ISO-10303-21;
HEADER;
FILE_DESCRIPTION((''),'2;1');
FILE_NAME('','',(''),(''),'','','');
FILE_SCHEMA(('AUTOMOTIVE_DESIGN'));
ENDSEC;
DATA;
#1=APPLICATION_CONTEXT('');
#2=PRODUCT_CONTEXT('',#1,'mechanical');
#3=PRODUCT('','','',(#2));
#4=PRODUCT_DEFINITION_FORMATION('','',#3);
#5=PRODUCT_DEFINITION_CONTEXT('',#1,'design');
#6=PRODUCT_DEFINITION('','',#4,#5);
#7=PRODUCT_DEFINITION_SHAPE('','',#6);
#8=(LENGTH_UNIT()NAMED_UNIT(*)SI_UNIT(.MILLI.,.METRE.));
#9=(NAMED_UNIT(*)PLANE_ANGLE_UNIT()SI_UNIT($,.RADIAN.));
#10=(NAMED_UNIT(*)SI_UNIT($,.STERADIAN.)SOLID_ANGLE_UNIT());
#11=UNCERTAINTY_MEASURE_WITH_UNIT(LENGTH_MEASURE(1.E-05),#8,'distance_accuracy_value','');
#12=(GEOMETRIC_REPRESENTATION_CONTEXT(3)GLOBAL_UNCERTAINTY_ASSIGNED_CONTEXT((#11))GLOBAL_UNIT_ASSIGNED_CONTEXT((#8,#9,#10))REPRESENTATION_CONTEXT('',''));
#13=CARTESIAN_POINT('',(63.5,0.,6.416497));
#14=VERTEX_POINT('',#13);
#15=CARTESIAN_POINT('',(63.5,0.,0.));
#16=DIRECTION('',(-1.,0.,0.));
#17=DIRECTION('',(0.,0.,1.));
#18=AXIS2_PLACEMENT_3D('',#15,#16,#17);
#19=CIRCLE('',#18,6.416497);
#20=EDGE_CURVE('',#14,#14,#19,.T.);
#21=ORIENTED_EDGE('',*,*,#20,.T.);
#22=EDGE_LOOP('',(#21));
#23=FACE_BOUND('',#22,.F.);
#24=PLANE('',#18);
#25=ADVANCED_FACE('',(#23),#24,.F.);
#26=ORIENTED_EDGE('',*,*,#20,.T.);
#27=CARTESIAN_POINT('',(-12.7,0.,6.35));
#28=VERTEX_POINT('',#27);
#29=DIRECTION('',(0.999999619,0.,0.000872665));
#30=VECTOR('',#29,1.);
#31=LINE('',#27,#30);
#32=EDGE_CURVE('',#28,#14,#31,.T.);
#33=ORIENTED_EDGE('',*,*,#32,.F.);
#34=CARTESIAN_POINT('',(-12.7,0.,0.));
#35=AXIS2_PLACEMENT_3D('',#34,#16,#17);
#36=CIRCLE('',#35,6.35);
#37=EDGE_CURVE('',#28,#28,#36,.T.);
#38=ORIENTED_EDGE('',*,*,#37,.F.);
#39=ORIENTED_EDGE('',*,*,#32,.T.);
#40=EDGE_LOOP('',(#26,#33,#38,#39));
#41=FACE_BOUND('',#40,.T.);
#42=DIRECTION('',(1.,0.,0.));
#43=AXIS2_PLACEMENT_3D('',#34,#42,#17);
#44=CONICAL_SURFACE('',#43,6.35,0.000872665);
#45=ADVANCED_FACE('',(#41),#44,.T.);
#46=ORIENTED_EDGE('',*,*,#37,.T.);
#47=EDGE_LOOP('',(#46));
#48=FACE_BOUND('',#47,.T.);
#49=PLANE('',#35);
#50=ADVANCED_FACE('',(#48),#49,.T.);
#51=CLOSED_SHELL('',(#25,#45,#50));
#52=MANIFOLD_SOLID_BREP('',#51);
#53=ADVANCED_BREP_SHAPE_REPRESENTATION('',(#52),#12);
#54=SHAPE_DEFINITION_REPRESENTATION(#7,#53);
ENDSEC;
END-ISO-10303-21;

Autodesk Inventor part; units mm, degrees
ref_plane "YZ Plane" through (0, 0, 0) normal (1, 0, 0) x (0, 1, 0)
ref_plane "XZ Plane" through (0, 0, 0) normal (0, 1, 0) x (-1, 0, 0)
ref_plane "XY Plane" through (0, 0, 0) normal (0, 0, 1) x (1, 0, 0)
ref_plane "Work Plane1" through (-12.7, 0, 0) normal (-1, 0, 0) x (0, 0, 1)
sketch "Sketch3" plane through (-12.7, 0, 0) normal (-1, 0, 0) x (0, 0, 1)
  circle A0 centre (0, 0) radius 6.35
extrude "Extrusion2" add sketch "Sketch3" against normal blind 76.2
draft "FaceDraft1" angle 0.05 pull direction (-1, 0, 0) faces at (38.1, -1.0186, 6.2678) fixed edges at (-12.7, 0, -6.35)
properties part number "Piston Assembly Cast Image 1"
